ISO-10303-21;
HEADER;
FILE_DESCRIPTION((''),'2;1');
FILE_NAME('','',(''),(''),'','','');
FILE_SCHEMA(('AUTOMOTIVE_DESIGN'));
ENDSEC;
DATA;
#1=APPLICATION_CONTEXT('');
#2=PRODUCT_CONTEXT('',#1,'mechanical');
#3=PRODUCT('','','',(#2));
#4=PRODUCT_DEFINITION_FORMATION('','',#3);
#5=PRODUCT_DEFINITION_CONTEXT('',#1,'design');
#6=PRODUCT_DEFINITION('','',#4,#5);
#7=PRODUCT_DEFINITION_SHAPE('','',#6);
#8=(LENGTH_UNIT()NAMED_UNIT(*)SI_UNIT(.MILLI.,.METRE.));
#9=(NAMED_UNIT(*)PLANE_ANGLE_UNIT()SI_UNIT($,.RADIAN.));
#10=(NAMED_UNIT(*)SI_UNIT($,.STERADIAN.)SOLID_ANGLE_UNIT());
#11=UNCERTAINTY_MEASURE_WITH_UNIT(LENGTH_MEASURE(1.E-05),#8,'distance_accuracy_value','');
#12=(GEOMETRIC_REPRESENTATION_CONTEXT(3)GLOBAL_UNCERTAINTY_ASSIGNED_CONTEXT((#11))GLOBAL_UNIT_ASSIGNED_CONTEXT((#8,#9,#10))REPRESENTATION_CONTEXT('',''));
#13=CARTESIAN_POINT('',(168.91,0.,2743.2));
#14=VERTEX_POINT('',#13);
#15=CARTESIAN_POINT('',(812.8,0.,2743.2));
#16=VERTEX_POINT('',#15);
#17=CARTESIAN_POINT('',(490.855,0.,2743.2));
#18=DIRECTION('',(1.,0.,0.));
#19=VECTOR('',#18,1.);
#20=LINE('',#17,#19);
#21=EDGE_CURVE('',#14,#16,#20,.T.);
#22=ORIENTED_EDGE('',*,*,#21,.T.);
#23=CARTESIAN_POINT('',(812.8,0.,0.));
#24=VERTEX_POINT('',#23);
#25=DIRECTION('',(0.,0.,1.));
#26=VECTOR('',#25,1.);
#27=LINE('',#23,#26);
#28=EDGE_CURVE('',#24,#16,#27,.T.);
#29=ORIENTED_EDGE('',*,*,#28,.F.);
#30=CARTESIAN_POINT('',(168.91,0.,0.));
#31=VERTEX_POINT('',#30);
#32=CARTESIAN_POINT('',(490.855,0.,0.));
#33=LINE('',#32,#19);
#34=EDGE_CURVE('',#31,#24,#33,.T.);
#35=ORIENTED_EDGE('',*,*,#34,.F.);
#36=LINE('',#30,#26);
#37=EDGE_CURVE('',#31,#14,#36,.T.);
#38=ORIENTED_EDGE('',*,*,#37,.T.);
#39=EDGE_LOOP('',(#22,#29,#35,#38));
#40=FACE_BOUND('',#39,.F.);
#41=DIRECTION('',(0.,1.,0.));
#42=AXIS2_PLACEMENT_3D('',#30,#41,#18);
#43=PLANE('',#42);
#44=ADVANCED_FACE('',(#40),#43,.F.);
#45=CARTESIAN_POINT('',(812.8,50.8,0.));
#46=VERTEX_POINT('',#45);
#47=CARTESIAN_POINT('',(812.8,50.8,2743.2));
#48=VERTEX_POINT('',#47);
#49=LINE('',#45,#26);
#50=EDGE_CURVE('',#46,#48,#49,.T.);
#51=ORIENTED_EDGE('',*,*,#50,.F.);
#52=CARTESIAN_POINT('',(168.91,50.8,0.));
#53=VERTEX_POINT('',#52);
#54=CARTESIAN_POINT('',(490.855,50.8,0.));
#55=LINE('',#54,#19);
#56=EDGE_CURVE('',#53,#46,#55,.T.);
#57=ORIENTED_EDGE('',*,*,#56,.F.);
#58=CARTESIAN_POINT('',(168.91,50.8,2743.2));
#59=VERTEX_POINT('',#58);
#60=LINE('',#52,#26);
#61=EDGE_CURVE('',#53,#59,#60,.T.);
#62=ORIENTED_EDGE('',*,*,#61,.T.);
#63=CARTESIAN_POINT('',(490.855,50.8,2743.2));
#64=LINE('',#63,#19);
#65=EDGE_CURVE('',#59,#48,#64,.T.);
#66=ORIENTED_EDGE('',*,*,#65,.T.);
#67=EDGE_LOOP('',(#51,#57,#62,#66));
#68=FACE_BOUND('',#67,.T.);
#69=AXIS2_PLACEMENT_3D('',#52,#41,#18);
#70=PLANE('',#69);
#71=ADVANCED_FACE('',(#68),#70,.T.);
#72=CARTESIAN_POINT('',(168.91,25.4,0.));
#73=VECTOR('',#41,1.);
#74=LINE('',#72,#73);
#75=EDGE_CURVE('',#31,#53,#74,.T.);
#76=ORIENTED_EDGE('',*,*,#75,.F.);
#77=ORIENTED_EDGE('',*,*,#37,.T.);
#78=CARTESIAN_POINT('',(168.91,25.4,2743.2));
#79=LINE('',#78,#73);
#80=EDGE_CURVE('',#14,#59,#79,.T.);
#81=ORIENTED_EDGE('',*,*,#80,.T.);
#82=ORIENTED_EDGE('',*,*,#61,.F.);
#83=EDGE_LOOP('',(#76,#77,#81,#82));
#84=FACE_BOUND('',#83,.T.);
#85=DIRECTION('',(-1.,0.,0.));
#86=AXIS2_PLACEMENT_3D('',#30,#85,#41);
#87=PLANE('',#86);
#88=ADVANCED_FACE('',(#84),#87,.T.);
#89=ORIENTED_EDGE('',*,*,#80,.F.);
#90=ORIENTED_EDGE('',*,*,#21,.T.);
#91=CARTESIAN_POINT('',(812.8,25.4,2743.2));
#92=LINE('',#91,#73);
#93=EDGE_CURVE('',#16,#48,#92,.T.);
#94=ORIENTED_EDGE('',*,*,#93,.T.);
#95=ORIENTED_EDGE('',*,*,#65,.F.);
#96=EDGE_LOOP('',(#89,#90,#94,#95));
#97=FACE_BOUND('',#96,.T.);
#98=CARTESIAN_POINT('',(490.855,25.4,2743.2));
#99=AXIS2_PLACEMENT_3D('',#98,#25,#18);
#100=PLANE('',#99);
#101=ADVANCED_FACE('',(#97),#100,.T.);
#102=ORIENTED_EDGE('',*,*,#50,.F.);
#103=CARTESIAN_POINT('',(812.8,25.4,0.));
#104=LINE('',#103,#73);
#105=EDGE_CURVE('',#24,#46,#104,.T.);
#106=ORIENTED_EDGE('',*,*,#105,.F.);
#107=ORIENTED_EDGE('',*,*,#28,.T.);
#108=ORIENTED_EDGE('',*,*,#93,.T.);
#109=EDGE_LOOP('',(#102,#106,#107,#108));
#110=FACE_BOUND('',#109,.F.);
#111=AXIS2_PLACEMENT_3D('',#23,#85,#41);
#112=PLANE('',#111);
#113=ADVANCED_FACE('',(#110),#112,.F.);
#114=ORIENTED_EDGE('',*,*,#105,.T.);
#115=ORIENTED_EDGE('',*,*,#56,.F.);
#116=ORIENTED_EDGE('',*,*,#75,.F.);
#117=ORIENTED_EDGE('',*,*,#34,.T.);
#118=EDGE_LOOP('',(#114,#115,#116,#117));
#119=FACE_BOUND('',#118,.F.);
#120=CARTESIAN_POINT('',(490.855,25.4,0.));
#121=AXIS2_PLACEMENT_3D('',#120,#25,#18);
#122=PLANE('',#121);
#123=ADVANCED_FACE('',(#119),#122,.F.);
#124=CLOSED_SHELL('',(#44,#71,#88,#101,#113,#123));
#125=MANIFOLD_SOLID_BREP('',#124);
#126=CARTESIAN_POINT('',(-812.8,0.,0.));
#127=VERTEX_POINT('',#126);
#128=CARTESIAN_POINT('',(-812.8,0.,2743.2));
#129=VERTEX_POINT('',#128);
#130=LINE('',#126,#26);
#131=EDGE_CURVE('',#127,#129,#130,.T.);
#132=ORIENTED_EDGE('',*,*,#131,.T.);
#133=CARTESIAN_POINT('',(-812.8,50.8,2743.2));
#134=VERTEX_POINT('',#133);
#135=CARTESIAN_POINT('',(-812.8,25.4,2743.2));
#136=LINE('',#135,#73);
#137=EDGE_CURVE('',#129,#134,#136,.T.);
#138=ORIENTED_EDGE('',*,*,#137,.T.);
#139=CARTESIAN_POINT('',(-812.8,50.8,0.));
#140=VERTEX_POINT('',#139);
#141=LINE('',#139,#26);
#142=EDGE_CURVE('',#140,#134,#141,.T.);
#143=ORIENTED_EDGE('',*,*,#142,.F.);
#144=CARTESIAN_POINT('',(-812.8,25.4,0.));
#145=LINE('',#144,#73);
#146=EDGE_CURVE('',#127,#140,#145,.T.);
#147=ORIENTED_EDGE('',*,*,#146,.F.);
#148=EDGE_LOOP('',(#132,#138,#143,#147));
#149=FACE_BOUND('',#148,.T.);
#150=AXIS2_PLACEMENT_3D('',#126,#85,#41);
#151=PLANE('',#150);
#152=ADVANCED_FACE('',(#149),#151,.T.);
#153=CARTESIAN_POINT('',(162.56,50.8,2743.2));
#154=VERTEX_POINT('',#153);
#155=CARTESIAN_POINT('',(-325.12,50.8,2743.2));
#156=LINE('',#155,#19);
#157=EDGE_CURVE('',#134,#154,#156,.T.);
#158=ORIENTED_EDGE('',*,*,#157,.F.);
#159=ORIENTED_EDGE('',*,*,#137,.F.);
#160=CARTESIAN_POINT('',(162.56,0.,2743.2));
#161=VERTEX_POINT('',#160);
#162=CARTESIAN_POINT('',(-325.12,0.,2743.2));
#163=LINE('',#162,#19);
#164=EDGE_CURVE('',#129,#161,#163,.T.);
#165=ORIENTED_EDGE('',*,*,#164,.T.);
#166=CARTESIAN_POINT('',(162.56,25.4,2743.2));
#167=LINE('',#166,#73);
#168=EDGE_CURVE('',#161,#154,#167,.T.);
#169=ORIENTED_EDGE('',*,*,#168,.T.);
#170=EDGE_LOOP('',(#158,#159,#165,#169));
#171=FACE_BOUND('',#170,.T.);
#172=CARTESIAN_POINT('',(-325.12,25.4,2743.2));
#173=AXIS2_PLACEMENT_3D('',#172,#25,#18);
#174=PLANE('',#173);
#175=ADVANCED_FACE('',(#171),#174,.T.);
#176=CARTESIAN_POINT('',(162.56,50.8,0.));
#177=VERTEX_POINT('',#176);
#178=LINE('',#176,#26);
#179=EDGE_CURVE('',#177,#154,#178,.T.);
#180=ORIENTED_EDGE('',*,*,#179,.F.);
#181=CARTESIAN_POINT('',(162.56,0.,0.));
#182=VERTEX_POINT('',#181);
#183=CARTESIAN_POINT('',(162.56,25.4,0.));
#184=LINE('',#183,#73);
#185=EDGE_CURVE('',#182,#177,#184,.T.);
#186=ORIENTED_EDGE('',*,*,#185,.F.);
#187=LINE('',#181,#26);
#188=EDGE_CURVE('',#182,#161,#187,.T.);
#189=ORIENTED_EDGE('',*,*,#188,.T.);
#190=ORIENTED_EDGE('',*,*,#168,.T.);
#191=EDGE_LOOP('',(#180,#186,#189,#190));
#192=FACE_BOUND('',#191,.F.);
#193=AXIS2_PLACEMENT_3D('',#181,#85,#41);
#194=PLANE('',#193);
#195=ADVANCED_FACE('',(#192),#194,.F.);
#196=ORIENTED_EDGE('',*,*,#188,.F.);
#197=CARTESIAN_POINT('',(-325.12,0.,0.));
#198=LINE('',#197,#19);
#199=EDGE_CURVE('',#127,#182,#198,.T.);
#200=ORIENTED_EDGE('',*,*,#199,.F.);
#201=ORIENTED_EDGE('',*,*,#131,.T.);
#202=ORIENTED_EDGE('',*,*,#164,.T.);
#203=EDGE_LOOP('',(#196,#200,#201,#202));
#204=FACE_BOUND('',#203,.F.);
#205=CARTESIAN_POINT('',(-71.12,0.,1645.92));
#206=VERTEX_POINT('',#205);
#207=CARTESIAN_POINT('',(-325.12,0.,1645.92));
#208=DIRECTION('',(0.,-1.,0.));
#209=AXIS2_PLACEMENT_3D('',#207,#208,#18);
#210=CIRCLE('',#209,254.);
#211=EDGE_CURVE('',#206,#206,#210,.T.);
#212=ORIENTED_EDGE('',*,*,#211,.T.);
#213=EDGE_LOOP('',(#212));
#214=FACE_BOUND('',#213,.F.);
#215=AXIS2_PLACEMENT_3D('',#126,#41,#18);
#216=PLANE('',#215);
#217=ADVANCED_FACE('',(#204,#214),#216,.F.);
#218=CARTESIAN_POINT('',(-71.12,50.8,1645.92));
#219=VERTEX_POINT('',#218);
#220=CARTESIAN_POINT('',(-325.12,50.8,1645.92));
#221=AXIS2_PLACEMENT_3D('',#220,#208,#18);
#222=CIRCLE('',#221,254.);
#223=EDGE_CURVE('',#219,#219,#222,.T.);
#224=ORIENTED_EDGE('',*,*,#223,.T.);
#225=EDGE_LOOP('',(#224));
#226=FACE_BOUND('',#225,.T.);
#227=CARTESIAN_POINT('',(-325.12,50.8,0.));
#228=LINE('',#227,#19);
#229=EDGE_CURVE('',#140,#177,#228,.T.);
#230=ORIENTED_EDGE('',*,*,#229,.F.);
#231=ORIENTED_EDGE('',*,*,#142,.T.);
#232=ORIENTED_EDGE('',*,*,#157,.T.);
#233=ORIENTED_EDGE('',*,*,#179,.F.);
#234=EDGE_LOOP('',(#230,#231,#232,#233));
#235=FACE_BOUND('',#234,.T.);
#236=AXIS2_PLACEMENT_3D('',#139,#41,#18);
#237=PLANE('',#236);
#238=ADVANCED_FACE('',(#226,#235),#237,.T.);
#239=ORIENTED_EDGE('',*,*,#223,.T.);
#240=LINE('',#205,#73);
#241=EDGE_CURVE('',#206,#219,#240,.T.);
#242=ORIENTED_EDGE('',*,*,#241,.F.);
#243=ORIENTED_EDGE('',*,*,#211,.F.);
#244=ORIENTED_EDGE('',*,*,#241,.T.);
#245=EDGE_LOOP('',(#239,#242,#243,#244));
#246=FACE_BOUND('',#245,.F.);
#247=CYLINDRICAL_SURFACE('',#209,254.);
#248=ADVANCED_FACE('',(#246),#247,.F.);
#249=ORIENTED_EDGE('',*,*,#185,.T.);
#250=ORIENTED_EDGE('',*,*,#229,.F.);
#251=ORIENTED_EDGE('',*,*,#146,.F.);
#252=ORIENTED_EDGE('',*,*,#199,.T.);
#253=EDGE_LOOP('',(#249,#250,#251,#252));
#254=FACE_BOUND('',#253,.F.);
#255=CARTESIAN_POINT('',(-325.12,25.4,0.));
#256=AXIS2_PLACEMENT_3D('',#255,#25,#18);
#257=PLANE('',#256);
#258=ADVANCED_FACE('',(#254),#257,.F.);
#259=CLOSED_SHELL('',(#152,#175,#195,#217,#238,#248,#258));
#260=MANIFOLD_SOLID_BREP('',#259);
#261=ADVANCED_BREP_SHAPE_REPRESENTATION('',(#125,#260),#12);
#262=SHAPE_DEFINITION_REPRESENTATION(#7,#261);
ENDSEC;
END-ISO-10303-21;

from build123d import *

# Parameters (mm, degrees)
F1_W     = 975.36
F1_H     = 50.8
F2_DEPTH = 2743.2
F1_W_2   = 643.89
F3_R     = 254
F4_DEPTH = 50.801


# Not quite as in the source:
# - a variable given as a bare number and used for a length is read in inches; the dataset says mm whatever the document's units were


with BuildPart() as f2:
    # F1 (on Top) → F2 (new body)
    with BuildSketch(Plane.XY):
        with Locations((-325.12, 25.4)):
            Rectangle(F1_W, F1_H)
    extrude(amount=F2_DEPTH)

    # F3 (on face) → F4 (cut, through all)
    with BuildSketch(Plane.XZ):
        with Locations((-325.12, 1645.92)):
            Circle(F3_R)
    extrude(amount=-F4_DEPTH, mode=Mode.SUBTRACT)


with BuildPart() as f2b:
    # F1 (on Top) → F2, piece 2 (new body)
    with BuildSketch(Plane.XY):
        with Locations((490.855, 25.4)):
            Rectangle(F1_W_2, F1_H)
    extrude(amount=F2_DEPTH)


solid = Compound([f2.part, f2b.part])
